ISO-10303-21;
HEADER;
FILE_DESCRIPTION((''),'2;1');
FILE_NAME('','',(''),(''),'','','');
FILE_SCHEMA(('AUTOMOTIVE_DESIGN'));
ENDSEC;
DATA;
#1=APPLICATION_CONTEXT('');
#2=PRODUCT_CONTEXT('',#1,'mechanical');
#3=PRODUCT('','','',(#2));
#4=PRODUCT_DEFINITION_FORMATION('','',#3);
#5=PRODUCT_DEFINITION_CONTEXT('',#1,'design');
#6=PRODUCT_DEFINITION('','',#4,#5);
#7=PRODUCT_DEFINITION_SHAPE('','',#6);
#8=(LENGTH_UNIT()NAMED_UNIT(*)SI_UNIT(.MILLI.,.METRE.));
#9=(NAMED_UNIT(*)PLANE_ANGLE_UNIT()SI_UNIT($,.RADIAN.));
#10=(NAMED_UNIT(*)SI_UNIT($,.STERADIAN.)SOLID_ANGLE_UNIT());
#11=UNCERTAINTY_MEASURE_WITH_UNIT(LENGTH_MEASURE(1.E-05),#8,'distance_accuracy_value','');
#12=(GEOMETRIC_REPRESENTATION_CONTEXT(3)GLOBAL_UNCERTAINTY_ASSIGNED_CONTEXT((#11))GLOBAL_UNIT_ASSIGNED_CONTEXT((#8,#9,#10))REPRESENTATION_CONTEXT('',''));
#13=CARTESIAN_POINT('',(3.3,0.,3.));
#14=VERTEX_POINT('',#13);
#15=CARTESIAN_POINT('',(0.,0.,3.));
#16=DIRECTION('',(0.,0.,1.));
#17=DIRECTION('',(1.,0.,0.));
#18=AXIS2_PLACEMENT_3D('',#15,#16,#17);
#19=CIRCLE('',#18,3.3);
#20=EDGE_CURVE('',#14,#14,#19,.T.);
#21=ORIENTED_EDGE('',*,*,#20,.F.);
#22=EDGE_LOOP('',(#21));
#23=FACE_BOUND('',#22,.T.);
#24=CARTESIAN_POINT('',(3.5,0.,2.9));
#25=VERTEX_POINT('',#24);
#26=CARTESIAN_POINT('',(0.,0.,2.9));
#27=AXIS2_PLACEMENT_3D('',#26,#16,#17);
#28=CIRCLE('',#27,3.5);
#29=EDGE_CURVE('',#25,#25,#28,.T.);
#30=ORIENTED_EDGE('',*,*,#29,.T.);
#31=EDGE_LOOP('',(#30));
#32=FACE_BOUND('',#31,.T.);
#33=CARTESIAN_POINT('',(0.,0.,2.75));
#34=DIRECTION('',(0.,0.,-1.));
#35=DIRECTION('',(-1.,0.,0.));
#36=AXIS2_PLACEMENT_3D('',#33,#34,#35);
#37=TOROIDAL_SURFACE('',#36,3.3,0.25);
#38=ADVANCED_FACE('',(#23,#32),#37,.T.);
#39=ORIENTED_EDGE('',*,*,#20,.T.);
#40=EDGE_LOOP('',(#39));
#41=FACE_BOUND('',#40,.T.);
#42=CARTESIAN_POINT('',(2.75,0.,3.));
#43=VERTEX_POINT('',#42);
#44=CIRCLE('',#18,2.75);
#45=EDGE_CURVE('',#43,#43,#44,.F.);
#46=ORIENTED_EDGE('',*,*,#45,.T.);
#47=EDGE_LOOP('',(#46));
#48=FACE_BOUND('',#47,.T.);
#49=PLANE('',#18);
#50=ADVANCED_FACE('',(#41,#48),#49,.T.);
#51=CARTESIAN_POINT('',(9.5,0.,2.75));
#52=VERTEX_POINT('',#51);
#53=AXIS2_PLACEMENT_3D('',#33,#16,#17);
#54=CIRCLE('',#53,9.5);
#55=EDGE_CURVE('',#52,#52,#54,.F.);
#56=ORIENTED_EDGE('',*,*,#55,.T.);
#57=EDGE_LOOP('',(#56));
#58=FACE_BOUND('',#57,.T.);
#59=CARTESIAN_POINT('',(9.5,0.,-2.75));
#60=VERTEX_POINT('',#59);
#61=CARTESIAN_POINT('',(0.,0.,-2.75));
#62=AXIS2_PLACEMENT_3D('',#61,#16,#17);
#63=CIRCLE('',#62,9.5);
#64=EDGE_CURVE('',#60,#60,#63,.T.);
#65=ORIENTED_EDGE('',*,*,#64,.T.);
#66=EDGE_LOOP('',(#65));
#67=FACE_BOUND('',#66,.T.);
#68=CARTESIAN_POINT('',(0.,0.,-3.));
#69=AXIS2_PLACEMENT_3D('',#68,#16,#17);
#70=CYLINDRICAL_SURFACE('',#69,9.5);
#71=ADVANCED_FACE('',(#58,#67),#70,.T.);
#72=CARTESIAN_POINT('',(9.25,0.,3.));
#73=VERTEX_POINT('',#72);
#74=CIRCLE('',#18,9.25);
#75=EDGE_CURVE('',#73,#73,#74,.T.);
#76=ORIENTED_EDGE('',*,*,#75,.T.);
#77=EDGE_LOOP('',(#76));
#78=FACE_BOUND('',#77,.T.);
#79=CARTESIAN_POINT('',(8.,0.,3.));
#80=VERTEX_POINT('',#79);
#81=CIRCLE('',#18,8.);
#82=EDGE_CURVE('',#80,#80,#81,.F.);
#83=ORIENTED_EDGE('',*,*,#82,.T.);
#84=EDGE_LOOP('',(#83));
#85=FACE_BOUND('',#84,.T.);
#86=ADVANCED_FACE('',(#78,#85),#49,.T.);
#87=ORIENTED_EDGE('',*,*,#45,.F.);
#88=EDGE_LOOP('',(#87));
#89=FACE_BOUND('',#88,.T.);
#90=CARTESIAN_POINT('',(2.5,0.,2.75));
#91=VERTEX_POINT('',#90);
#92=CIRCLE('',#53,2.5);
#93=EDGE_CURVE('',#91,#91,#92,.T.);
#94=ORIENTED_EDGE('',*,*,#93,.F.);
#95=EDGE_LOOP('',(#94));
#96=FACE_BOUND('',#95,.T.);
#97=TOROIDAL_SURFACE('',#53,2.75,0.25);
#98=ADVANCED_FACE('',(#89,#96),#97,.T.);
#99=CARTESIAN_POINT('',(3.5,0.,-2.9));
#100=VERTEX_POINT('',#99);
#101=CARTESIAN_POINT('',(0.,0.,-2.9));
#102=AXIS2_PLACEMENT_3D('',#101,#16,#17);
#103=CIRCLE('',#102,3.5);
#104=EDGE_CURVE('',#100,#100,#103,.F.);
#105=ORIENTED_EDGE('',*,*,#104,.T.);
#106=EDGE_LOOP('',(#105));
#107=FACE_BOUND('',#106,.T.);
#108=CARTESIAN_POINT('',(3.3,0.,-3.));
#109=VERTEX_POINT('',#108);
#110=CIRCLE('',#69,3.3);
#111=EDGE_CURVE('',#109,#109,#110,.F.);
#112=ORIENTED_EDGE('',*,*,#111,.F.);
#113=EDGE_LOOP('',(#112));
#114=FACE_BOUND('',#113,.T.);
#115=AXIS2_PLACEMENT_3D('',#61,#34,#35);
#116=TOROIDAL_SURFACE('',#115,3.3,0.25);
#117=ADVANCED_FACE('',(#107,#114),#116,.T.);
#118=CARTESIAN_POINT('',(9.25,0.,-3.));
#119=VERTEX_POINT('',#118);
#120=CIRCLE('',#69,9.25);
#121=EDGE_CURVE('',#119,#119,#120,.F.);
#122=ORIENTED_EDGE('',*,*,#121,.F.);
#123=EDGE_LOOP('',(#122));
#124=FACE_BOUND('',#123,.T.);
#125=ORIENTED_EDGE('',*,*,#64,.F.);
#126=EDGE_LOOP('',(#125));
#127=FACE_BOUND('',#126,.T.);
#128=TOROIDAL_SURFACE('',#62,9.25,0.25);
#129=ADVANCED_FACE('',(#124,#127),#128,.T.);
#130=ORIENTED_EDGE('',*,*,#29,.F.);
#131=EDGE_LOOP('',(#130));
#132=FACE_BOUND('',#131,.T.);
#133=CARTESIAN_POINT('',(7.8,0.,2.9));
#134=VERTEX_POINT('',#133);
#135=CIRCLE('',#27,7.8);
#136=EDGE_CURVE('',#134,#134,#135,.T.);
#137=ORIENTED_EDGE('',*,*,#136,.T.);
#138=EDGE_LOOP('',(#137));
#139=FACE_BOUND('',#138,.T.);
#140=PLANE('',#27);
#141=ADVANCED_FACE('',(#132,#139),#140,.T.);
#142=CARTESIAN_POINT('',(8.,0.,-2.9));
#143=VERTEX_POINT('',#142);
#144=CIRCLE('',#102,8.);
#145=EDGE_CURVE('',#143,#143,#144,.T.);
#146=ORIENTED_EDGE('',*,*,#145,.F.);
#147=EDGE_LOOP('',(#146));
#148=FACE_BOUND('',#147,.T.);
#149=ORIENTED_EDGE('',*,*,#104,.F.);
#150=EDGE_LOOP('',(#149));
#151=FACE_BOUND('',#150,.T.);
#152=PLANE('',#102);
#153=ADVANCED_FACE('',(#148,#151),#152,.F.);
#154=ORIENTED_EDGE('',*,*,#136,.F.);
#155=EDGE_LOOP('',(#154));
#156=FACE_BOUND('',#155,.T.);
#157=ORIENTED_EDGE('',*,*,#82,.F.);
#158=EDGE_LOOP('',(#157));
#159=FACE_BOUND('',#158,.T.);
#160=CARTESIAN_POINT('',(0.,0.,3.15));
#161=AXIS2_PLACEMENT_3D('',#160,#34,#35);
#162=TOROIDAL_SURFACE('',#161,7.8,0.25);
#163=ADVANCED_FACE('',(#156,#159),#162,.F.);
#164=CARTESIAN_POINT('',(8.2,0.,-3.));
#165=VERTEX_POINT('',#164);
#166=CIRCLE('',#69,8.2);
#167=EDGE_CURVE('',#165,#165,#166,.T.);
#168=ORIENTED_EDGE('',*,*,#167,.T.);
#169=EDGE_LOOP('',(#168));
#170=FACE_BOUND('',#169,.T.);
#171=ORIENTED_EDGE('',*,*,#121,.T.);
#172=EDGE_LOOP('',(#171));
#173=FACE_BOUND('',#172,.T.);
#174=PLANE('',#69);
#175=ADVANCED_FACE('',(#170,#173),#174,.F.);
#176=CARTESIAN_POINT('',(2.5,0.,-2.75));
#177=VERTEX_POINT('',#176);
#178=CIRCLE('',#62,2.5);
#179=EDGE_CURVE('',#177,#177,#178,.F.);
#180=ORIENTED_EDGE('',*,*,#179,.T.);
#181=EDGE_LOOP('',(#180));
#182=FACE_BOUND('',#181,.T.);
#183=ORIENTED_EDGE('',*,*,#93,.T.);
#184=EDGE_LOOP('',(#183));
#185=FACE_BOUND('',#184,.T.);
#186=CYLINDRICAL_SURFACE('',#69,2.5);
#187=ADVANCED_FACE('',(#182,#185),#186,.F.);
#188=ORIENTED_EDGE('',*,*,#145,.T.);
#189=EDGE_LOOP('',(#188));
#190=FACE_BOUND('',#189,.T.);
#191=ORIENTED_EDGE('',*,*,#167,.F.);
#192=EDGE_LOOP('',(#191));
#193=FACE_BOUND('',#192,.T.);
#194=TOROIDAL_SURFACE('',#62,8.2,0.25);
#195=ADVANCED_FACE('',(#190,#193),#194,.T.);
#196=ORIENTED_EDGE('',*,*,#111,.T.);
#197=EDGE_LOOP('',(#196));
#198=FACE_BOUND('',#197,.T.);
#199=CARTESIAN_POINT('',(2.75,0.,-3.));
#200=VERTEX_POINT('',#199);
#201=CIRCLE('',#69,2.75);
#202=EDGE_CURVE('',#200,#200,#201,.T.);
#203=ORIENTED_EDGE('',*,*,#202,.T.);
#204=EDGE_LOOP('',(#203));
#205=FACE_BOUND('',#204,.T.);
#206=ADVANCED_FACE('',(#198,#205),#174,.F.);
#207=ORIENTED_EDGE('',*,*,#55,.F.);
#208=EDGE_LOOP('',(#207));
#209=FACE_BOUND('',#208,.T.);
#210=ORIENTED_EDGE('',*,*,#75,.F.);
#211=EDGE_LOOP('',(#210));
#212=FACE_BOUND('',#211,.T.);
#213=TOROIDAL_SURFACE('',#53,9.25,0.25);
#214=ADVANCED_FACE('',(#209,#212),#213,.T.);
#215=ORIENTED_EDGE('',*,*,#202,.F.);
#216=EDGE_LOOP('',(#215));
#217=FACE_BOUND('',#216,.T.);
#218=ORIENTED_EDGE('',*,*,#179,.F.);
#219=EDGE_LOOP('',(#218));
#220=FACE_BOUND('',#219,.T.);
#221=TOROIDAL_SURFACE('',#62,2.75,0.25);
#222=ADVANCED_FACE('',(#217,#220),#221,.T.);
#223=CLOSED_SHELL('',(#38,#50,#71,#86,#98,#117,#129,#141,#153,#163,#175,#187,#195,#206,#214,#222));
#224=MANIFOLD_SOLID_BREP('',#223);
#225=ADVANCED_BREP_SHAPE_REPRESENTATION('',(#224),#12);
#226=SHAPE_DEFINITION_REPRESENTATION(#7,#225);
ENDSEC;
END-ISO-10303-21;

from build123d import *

# Parameters (mm, degrees)
BOSS_EXTRU_1_DEPTH           = 3
BOSS_EXTRU_1_DEPTH_BACK      = 3
ESQUISSE1_R                  = 9.5
ESQUISSE1_R_2                = 2.5
ENL_V_MAT_EXTRU_1_DEPTH      = 6
ENL_V_MAT_EXTRU_1_DEPTH_BACK = 6
ESQUISSE2_R                  = 8
ESQUISSE2_R_2                = 3.5
BOSS_EXTRU_2_DEPTH           = 2.9
BOSS_EXTRU_2_DEPTH_BACK      = 2.9
ESQUISSE4_R                  = 8
ESQUISSE4_R_2                = 3.5
CONG_1_R                     = 0.25


with BuildPart() as part:
    # Esquisse1 → Boss.-Extru.1 (new, two sides: drawn at the far end of the back side and taken through both)
    with BuildSketch(Plane.XY.offset(-BOSS_EXTRU_1_DEPTH_BACK)):
        Circle(ESQUISSE1_R)
        Circle(ESQUISSE1_R_2, mode=Mode.SUBTRACT)
    extrude(amount=BOSS_EXTRU_1_DEPTH + BOSS_EXTRU_1_DEPTH_BACK)

    # Esquisse2 → Enlèv. mat.-Extru.1 (cut, two sides: drawn at the far end of the back side and taken through both)
    with BuildSketch(Plane.XY.offset(-ENL_V_MAT_EXTRU_1_DEPTH_BACK)):
        Circle(ESQUISSE2_R)
        Circle(ESQUISSE2_R_2, mode=Mode.SUBTRACT)
    extrude(amount=ENL_V_MAT_EXTRU_1_DEPTH + ENL_V_MAT_EXTRU_1_DEPTH_BACK, mode=Mode.SUBTRACT)


with BuildPart() as enl_v_mat_extru_1_piece_1:
    # of the separate pieces the step leaves, piece 1, a body of its own (enl_v_mat_extru_1_pieces)
    add(part.part.solids().sort_by_distance((9.5, 0, 0))[0])



with BuildPart() as enl_v_mat_extru_1_piece_2:
    # of the separate pieces the step leaves, piece 2, a body of its own (enl_v_mat_extru_1_pieces)
    add(part.part.solids().sort_by_distance((3.5, 0, 3))[0])


with BuildPart() as enl_v_mat_extru_1_piece_1_1:
    add(enl_v_mat_extru_1_piece_1.part)

    add(enl_v_mat_extru_1_piece_2.part)  # Boss.-Extru.2 merges Enlèv. mat.-Extru.1 piece 2
    # Esquisse4 → Boss.-Extru.2 (add, two sides: drawn at the far end of the back side and taken through both)
    with BuildSketch(Plane.XY.offset(-BOSS_EXTRU_2_DEPTH_BACK)):
        Circle(ESQUISSE4_R)
        Circle(ESQUISSE4_R_2, mode=Mode.SUBTRACT)
    extrude(amount=BOSS_EXTRU_2_DEPTH + BOSS_EXTRU_2_DEPTH_BACK)

    # Congé1
    # the kernel refuses this fillet: 0.25 mm, written as the material it adds along each edge
    with BuildSketch(Plane(origin=(0, 0, 2.9), x_dir=(1, 0, 0), z_dir=(0, -1, 0))) as cong_1_piece_1:
        with BuildLine():
            CenterArc((7.8, 0.25), CONG_1_R, 270, 53.130102355)
            Line((8, 0.1), (8.004, 0.097))
            ThreePointArc((8.004, 0.097), (8.005, 0.05), (8.005, 0))
            Line((8.005, 0), (8, -0.005))
            Line((8, -0.005), (7.8, -0.005))
            Line((7.8, -0.005), (7.8, 0))
        make_face()
    revolve(axis=Axis((0, 0, 2.9), (0, 0, 1)))
    # the kernel refuses this fillet: 0.25 mm, written as the material it takes off along each edge
    with BuildSketch(Plane(origin=(0, 0, -3), x_dir=(1, 0, 0), z_dir=(0, -1, 0))) as cong_1_2_piece_1:
        with BuildLine():
            CenterArc((2.5 + CONG_1_R, CONG_1_R), CONG_1_R, 180, 90)
            Line((2.5 + CONG_1_R, 0), (2.5 + CONG_1_R, -CONG_1_R * 0.02))
            Line((2.5 + CONG_1_R, -CONG_1_R * 0.02), (2.5 - CONG_1_R * 0.02, -CONG_1_R * 0.02))
            Line((2.5 - CONG_1_R * 0.02, -CONG_1_R * 0.02), (2.5 - CONG_1_R * 0.02, CONG_1_R))
            Line((2.5 - CONG_1_R * 0.02, CONG_1_R), (2.5, CONG_1_R))
        make_face()
    revolve(axis=Axis((0, 0, -3), (0, 0, 1)), mode=Mode.SUBTRACT)
    with BuildSketch(Plane(origin=(0, 0, 3), x_dir=(1, 0, 0), z_dir=(0, -1, 0))) as cong_1_2_piece_2:
        with BuildLine():
            CenterArc((9.5 - CONG_1_R, -CONG_1_R), CONG_1_R, 0, 90)
            Line((9.5, -CONG_1_R), (9.5 + CONG_1_R * 0.02, -CONG_1_R))
            Line((9.5 + CONG_1_R * 0.02, -CONG_1_R), (9.5 + CONG_1_R * 0.02, CONG_1_R * 0.02))
            Line((9.5 + CONG_1_R * 0.02, CONG_1_R * 0.02), (9.5 - CONG_1_R, CONG_1_R * 0.02))
            Line((9.5 - CONG_1_R, CONG_1_R * 0.02), (9.5 - CONG_1_R, 0))
        make_face()
    revolve(axis=Axis((0, 0, 3), (0, 0, 1)), mode=Mode.SUBTRACT)
    with BuildSketch(Plane(origin=(0, 0, -3), x_dir=(1, 0, 0), z_dir=(0, -1, 0))) as cong_1_2_piece_3:
        with BuildLine():
            CenterArc((3.3, 0.25), CONG_1_R, 270, 53.130102355)
            Line((3.5, 0.1), (3.504, 0.097))
            ThreePointArc((3.504, 0.097), (3.505, 0.05), (3.505, 0))
            Line((3.505, 0), (3.5, -0.005))
            Line((3.5, -0.005), (3.3, -0.005))
            Line((3.3, -0.005), (3.3, 0))
        make_face()
    revolve(axis=Axis((0, 0, -3), (0, 0, 1)), mode=Mode.SUBTRACT)
    with BuildSketch(Plane(origin=(0, 0, 3), x_dir=(1, 0, 0), z_dir=(0, -1, 0))) as cong_1_2_piece_4:
        with BuildLine():
            CenterArc((2.5 + CONG_1_R, -CONG_1_R), CONG_1_R, 90, 90)
            Line((2.5, -CONG_1_R), (2.5 - CONG_1_R * 0.02, -CONG_1_R))
            Line((2.5 - CONG_1_R * 0.02, -CONG_1_R), (2.5 - CONG_1_R * 0.02, CONG_1_R * 0.02))
            Line((2.5 - CONG_1_R * 0.02, CONG_1_R * 0.02), (2.5 + CONG_1_R, CONG_1_R * 0.02))
            Line((2.5 + CONG_1_R, CONG_1_R * 0.02), (2.5 + CONG_1_R, 0))
        make_face()
    revolve(axis=Axis((0, 0, 3), (0, 0, 1)), mode=Mode.SUBTRACT)
    with BuildSketch(Plane(origin=(0, 0, 3), x_dir=(1, 0, 0), z_dir=(0, 1, 0))) as cong_1_2_piece_5:
        with BuildLine():
            CenterArc((3.3, 0.25), CONG_1_R, 270, 53.130102355)
            Line((3.5, 0.1), (3.504, 0.097))
            ThreePointArc((3.504, 0.097), (3.505, 0.05), (3.505, 0))
            Line((3.505, 0), (3.5, -0.005))
            Line((3.5, -0.005), (3.3, -0.005))
            Line((3.3, -0.005), (3.3, 0))
        make_face()
    revolve(axis=Axis((0, 0, 3), (0, 0, -1)), mode=Mode.SUBTRACT)
    with BuildSketch(Plane(origin=(0, 0, -3), x_dir=(1, 0, 0), z_dir=(0, -1, 0))) as cong_1_2_piece_6:
        with BuildLine():
            CenterArc((8.2, 0.25), CONG_1_R, 216.869897645, 53.130102355)
            Line((8.2, 0), (8.2, -0.005))
            Line((8.2, -0.005), (8, -0.005))
            Line((8, -0.005), (7.995, 0))
            ThreePointArc((7.995, 0), (7.995, 0.05), (7.996, 0.097))
            Line((7.996, 0.097), (8, 0.1))
        make_face()
    revolve(axis=Axis((0, 0, -3), (0, 0, 1)), mode=Mode.SUBTRACT)
    with BuildSketch(Plane(origin=(0, 0, -3), x_dir=(1, 0, 0), z_dir=(0, -1, 0))) as cong_1_2_piece_7:
        with BuildLine():
            CenterArc((9.5 - CONG_1_R, CONG_1_R), CONG_1_R, 270, 90)
            Line((9.5 - CONG_1_R, 0), (9.5 - CONG_1_R, -CONG_1_R * 0.02))
            Line((9.5 - CONG_1_R, -CONG_1_R * 0.02), (9.5 + CONG_1_R * 0.02, -CONG_1_R * 0.02))
            Line((9.5 + CONG_1_R * 0.02, -CONG_1_R * 0.02), (9.5 + CONG_1_R * 0.02, CONG_1_R))
            Line((9.5 + CONG_1_R * 0.02, CONG_1_R), (9.5, CONG_1_R))
        make_face()
    revolve(axis=Axis((0, 0, -3), (0, 0, 1)), mode=Mode.SUBTRACT)


solid = enl_v_mat_extru_1_piece_1_1.part
